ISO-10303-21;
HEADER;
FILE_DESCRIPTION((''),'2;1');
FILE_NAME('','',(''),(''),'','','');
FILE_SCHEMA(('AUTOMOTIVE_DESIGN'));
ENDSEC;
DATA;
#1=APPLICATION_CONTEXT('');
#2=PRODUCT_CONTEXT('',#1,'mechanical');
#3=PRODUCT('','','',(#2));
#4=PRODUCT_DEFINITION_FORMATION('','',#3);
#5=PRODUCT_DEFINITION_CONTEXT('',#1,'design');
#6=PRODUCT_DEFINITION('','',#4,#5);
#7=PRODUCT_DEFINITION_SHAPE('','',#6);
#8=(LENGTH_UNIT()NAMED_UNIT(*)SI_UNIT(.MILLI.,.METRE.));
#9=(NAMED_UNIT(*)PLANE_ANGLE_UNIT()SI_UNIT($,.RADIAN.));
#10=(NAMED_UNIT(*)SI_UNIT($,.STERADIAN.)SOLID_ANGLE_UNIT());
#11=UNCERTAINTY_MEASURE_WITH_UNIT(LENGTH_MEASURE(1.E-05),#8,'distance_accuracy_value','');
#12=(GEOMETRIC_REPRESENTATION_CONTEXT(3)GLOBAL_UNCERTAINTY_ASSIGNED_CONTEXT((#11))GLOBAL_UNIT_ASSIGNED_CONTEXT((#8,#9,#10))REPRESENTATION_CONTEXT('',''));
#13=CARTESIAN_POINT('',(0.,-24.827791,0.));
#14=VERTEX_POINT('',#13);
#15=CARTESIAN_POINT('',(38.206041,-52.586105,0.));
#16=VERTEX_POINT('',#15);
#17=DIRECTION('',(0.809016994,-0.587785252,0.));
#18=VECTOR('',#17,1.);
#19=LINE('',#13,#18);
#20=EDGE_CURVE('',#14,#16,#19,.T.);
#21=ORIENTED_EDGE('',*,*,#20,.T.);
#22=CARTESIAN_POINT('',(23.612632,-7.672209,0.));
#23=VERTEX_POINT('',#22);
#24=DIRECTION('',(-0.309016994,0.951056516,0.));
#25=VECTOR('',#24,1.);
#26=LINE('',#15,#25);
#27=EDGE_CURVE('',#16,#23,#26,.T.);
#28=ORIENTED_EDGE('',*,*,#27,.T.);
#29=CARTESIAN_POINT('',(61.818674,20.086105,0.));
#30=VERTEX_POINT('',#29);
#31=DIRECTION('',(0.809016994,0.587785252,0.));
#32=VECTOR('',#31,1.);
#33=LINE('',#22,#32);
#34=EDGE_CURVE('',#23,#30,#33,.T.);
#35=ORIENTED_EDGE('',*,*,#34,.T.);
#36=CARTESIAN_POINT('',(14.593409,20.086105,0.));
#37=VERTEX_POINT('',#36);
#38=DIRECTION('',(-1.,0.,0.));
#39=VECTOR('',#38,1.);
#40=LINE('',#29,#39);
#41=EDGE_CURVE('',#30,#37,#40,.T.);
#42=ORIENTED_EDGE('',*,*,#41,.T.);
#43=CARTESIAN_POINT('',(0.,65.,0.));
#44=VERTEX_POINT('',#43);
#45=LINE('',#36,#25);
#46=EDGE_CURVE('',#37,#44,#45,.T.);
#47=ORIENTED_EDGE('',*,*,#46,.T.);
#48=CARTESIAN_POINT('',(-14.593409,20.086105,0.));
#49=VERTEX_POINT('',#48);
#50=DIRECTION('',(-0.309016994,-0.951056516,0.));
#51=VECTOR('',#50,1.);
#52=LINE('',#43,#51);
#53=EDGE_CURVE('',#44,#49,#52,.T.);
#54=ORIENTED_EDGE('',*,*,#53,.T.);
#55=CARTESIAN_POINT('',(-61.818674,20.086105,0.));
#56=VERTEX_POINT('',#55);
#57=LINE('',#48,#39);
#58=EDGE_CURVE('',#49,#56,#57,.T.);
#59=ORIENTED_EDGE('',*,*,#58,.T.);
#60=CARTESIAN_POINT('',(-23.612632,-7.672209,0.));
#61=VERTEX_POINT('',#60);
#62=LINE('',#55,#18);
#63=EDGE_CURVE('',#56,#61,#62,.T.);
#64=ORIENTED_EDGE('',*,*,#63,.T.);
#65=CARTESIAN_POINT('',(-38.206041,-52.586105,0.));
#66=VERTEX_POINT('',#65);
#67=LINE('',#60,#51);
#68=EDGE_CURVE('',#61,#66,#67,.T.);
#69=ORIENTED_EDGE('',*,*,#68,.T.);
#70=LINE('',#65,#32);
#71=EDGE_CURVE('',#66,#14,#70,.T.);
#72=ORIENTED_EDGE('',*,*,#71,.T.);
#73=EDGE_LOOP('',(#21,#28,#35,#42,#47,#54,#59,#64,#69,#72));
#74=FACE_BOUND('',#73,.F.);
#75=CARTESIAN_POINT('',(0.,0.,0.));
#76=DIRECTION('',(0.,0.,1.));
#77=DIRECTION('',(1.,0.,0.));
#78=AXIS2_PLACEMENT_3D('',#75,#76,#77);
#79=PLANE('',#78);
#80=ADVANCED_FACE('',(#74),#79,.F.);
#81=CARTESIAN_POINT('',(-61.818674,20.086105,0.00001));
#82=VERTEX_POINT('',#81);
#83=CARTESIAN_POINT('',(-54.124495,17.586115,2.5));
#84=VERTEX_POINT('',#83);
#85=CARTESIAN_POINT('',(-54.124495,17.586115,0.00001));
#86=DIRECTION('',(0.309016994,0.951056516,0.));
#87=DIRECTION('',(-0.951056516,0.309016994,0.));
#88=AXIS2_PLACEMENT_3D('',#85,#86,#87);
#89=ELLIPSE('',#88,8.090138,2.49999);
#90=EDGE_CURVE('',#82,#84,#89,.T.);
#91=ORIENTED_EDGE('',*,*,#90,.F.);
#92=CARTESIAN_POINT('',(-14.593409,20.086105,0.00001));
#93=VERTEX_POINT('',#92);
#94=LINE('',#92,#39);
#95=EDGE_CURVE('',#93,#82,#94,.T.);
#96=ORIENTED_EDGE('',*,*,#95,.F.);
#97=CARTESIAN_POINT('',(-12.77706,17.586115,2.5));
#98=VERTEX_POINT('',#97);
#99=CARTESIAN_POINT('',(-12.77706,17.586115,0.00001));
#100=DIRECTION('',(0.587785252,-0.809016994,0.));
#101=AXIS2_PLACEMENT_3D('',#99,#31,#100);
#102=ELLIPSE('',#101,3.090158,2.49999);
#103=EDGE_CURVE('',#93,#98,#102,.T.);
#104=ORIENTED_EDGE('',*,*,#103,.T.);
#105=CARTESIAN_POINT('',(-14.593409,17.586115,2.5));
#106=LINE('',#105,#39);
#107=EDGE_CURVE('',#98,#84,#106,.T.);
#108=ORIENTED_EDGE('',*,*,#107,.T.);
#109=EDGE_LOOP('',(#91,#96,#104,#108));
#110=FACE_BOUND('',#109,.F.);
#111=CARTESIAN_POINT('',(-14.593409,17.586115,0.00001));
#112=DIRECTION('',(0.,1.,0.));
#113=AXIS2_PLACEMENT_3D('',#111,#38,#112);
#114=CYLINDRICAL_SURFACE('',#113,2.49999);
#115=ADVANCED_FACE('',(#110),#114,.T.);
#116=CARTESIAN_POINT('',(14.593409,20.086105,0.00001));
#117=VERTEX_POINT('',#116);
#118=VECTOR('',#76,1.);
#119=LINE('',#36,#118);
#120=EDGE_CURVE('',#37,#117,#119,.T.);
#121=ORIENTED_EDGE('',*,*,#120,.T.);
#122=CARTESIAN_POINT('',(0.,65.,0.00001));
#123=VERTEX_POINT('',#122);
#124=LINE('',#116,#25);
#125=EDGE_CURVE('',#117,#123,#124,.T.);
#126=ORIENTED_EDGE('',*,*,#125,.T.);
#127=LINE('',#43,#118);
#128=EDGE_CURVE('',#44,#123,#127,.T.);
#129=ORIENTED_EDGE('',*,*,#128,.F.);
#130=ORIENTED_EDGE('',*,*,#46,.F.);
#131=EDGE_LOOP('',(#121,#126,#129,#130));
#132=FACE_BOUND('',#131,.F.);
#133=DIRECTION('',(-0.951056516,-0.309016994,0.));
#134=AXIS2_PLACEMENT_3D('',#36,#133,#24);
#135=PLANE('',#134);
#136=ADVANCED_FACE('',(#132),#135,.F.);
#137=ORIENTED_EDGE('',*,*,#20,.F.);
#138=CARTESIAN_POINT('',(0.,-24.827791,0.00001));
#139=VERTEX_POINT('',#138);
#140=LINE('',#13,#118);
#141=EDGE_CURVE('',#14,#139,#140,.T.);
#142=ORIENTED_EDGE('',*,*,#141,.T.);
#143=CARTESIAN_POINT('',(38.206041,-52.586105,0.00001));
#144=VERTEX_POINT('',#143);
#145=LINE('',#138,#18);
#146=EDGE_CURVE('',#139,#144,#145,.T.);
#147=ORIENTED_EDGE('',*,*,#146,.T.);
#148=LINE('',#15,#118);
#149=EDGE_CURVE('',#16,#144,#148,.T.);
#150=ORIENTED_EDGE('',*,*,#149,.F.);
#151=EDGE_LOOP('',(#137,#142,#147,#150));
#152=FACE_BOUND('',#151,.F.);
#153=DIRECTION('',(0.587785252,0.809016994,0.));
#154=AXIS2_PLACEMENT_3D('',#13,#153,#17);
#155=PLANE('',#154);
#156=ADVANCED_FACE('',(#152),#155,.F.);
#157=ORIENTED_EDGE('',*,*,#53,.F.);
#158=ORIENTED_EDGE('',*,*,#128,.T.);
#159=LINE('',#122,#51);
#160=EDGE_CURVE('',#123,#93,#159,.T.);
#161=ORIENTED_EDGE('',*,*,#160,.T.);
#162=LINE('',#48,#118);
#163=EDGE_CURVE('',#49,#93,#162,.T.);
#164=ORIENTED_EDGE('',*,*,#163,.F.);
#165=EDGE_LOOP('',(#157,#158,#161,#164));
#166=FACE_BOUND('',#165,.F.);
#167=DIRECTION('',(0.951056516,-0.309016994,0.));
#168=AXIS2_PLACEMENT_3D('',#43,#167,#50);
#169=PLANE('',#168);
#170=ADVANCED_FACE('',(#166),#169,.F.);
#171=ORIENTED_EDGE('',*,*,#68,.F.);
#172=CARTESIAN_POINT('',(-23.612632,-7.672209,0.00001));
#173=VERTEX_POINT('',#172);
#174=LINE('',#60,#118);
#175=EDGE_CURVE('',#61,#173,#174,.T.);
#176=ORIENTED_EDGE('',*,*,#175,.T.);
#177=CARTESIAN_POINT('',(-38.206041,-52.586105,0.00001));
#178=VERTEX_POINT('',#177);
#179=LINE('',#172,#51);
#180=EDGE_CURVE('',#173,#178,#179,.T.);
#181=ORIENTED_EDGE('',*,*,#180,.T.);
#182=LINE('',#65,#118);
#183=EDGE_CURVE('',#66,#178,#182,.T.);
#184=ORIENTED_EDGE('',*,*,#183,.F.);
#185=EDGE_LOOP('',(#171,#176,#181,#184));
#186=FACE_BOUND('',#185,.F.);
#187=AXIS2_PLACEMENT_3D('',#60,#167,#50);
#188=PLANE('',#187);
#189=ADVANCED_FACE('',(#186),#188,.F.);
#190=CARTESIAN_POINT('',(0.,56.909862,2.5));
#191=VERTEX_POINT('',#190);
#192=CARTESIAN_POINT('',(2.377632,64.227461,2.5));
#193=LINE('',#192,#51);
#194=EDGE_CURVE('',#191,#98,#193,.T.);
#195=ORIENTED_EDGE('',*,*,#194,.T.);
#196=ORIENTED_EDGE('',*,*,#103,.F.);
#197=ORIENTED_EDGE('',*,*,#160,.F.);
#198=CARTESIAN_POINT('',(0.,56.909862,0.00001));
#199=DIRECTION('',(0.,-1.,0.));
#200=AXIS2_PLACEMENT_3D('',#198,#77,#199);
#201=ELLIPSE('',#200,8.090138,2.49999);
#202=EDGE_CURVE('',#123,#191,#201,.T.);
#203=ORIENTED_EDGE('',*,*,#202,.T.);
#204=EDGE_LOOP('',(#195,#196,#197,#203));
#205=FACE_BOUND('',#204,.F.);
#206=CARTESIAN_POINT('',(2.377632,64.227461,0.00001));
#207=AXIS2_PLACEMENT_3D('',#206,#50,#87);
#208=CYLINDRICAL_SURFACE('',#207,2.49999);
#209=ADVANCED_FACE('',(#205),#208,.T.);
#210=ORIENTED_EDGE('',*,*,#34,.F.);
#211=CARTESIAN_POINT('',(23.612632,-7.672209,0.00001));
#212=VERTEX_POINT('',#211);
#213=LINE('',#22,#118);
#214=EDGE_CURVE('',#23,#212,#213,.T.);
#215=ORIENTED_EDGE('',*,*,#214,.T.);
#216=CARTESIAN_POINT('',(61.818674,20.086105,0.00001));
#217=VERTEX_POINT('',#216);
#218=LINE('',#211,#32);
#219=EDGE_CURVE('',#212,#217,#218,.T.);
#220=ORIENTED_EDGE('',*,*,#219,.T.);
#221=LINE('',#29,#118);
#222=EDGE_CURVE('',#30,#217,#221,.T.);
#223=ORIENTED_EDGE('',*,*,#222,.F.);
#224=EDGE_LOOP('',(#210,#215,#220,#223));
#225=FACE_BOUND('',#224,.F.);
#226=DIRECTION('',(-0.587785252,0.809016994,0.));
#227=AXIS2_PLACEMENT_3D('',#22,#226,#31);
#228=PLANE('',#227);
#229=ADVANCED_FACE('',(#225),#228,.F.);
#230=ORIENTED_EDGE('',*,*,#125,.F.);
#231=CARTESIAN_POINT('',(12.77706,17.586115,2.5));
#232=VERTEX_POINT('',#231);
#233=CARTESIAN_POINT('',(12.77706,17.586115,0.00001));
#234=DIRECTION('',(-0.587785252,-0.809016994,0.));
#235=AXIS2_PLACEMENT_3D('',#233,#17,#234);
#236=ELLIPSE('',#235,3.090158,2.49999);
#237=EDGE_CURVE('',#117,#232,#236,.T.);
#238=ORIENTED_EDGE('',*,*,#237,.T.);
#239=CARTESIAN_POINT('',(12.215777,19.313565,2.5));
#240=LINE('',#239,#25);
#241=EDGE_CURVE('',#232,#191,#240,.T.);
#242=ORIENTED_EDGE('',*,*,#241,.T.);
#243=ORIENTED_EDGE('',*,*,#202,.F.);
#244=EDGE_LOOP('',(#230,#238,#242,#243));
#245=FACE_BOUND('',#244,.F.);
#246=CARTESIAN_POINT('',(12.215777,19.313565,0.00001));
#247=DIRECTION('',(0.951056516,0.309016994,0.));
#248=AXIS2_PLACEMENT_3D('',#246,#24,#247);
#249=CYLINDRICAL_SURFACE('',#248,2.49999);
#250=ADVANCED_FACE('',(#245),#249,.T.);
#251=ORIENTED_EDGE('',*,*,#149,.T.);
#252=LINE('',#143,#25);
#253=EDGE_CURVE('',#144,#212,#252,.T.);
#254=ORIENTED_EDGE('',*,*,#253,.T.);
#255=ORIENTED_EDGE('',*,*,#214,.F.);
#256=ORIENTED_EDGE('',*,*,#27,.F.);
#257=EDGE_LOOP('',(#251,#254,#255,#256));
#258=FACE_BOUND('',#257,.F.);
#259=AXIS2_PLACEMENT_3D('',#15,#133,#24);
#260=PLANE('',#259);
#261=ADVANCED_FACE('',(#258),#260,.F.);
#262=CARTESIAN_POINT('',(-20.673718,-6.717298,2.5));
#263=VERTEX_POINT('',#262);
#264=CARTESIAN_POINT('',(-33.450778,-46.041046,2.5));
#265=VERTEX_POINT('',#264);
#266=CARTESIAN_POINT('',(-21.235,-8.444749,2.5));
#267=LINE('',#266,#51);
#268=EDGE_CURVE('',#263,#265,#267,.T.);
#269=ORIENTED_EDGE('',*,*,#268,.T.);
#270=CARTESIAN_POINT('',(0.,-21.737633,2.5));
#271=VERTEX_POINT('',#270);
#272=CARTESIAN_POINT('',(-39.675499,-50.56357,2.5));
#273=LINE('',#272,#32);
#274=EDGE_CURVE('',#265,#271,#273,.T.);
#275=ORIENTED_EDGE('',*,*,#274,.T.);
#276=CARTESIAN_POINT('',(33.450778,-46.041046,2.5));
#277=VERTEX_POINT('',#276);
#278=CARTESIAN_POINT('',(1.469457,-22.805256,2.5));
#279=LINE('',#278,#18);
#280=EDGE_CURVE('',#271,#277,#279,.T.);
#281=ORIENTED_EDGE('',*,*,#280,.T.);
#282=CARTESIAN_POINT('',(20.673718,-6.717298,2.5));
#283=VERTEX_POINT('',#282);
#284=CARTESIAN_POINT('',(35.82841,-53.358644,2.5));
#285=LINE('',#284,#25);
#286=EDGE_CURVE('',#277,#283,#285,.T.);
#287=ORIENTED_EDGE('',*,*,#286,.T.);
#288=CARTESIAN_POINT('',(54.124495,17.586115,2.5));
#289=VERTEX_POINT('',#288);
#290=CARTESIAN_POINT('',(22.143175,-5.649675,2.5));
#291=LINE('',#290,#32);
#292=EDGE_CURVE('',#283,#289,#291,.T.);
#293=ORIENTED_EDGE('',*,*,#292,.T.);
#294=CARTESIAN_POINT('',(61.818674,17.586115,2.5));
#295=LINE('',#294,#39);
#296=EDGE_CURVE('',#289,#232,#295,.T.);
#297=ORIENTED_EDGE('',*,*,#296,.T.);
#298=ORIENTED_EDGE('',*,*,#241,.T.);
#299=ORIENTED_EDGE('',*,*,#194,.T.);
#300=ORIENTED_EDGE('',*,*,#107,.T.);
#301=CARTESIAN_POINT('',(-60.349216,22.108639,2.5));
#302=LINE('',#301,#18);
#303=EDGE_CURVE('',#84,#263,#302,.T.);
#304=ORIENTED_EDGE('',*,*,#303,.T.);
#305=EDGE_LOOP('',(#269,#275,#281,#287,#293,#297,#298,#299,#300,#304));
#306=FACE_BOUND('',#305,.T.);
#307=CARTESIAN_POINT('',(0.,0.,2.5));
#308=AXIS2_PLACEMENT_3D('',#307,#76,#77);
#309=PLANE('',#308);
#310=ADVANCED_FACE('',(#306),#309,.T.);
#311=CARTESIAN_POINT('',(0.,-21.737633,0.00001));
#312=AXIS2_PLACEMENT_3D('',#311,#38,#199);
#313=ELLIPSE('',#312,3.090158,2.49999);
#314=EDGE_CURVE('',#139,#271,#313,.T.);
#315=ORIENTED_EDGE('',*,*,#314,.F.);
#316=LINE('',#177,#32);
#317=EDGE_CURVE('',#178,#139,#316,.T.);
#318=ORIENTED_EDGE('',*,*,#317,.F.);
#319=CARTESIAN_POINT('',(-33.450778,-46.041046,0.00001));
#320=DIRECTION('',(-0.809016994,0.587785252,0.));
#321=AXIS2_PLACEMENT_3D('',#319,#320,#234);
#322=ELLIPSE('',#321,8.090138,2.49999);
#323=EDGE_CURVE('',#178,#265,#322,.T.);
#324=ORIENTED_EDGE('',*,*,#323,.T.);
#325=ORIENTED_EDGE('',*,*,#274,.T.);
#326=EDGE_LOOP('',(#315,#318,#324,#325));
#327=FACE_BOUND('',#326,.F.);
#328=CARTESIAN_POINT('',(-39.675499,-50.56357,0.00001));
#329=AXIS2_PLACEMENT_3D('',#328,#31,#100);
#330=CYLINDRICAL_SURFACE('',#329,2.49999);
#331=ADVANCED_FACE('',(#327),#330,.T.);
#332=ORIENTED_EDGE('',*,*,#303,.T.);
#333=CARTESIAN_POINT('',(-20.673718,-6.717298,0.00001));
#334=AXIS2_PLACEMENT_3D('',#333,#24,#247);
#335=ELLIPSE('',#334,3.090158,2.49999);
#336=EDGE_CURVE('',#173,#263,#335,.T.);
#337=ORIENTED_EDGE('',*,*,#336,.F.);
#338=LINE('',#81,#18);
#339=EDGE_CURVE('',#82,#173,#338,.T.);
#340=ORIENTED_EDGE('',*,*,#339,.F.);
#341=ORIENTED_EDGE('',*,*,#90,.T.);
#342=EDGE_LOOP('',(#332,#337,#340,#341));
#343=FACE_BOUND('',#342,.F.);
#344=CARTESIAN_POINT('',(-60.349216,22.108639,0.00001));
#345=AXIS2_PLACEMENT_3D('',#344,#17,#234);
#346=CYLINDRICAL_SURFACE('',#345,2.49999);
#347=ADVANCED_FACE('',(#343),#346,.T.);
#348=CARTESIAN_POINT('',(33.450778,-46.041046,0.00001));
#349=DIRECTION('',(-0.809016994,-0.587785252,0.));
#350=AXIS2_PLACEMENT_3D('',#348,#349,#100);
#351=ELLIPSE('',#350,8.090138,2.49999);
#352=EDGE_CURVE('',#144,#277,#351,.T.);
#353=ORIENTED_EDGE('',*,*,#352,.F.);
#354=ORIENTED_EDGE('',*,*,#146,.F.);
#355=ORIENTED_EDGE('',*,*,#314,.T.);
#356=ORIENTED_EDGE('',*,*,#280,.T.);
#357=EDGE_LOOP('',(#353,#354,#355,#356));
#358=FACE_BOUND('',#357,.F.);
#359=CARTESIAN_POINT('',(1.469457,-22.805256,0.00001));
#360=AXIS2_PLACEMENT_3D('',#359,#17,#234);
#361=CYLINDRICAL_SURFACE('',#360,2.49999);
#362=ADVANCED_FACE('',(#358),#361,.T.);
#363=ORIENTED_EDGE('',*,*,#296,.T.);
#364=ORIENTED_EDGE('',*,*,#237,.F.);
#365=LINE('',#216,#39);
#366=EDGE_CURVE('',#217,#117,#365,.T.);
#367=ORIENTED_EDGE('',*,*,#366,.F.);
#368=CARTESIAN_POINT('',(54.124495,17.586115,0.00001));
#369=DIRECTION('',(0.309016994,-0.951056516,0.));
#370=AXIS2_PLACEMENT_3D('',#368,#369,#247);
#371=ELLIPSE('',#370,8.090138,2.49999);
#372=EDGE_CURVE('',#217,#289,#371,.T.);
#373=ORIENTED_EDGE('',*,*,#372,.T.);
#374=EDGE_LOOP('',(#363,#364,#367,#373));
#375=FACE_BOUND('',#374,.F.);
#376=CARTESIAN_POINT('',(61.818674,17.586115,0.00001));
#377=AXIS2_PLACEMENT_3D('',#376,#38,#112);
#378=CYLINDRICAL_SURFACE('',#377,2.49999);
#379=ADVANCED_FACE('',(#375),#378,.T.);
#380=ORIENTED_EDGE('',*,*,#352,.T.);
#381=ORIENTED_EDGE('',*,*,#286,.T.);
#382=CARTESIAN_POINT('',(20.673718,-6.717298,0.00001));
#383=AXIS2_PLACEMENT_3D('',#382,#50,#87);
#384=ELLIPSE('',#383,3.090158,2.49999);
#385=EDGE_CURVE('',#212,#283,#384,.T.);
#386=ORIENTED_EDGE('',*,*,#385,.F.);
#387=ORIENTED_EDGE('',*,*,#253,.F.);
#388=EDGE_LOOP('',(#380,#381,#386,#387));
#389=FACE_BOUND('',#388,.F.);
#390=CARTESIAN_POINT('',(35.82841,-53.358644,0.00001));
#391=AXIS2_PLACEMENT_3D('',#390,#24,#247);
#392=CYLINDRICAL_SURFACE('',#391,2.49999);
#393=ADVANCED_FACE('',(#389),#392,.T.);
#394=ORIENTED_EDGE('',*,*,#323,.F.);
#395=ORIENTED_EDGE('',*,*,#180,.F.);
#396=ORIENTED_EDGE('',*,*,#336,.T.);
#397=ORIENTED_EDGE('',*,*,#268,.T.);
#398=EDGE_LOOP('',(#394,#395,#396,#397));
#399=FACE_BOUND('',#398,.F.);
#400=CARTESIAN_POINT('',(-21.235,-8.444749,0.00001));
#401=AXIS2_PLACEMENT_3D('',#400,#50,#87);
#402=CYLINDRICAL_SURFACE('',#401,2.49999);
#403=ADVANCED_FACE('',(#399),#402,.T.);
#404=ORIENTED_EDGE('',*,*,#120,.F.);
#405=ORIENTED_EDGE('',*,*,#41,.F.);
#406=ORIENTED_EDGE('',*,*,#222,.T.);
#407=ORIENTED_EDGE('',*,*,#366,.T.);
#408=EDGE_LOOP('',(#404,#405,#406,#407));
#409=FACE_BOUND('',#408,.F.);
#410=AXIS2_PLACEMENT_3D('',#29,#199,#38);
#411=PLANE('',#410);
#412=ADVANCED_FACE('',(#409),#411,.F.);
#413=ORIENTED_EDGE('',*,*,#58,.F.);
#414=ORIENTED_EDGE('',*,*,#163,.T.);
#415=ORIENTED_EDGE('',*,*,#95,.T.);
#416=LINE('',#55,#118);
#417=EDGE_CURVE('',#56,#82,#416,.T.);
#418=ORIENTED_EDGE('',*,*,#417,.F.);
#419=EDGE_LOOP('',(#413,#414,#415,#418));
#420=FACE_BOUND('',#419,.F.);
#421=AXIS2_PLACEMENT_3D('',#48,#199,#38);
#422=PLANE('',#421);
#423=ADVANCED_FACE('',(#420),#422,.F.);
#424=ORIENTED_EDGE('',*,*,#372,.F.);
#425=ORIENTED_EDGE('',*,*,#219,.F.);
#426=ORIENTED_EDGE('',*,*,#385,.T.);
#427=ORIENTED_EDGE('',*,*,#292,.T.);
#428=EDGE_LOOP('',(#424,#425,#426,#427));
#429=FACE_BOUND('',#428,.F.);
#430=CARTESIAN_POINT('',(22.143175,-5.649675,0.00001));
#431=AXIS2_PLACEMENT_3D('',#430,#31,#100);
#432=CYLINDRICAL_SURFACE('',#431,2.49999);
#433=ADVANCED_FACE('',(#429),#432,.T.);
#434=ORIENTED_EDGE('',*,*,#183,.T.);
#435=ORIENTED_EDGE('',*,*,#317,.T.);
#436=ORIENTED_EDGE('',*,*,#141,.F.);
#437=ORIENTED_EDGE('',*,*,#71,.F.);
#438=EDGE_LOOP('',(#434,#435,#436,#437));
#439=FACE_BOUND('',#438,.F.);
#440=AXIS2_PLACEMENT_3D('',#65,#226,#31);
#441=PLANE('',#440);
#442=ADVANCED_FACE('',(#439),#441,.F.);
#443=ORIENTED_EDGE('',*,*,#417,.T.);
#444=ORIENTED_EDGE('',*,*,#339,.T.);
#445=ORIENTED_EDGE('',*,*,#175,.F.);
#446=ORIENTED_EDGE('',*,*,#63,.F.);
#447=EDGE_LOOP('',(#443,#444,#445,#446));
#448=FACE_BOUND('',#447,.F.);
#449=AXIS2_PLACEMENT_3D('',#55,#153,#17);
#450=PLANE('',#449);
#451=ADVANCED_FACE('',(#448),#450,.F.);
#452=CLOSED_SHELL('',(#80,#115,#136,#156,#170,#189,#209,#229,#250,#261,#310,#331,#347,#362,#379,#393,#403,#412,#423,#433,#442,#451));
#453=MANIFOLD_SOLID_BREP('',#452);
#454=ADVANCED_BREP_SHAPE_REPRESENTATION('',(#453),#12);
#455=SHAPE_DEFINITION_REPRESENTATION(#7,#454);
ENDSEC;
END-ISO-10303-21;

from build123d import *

# Parameters (mm, degrees)
F1_DEPTH = 2.5
F2_R     = 2.49999


# Not quite as in the source:
# - a fillet or chamfer is up to 0.001 mm smaller than in the source, because OpenCascade refuses the exact size


with BuildPart() as f1:
    # F0 (on Top) → F1 (new body)
    with BuildSketch(Plane.XY):
        Polygon((-14.5934092388, 20.0861046344), (-61.8186735592, 20.0861046344), (-23.6126321602, -7.6722092687), (-38.206041399, -52.5861046344), (0, -24.8277907313), (38.206041399, -52.5861046344), (23.6126321602, -7.6722092687), (61.8186735592, 20.0861046344), (14.5934092388, 20.0861046344), (0, 65), align=None)
    extrude(amount=F1_DEPTH)

    # F2 (radius 2.5 in the source; OpenCascade refuses exactly that, so slightly less here)
    f2_edges = [f1.edges().sort_by_distance(p)[0] for p in [
        (-7.296705, 42.543052, 2.5),
        (-38.206041, 20.086105, 2.5),
        (-42.715653, 6.206948, 2.5),
        (-30.909337, -30.129157, 2.5),
        (19.103021, -38.706948, 2.5),
        (30.909337, -30.129157, 2.5),
        (42.715653, 6.206948, 2.5),
        (38.206041, 20.086105, 2.5),
        (7.296705, 42.543052, 2.5),
        (-19.103021, -38.706948, 2.5),
    ]]
    fillet(f2_edges, radius=F2_R)


solid = f1.part
